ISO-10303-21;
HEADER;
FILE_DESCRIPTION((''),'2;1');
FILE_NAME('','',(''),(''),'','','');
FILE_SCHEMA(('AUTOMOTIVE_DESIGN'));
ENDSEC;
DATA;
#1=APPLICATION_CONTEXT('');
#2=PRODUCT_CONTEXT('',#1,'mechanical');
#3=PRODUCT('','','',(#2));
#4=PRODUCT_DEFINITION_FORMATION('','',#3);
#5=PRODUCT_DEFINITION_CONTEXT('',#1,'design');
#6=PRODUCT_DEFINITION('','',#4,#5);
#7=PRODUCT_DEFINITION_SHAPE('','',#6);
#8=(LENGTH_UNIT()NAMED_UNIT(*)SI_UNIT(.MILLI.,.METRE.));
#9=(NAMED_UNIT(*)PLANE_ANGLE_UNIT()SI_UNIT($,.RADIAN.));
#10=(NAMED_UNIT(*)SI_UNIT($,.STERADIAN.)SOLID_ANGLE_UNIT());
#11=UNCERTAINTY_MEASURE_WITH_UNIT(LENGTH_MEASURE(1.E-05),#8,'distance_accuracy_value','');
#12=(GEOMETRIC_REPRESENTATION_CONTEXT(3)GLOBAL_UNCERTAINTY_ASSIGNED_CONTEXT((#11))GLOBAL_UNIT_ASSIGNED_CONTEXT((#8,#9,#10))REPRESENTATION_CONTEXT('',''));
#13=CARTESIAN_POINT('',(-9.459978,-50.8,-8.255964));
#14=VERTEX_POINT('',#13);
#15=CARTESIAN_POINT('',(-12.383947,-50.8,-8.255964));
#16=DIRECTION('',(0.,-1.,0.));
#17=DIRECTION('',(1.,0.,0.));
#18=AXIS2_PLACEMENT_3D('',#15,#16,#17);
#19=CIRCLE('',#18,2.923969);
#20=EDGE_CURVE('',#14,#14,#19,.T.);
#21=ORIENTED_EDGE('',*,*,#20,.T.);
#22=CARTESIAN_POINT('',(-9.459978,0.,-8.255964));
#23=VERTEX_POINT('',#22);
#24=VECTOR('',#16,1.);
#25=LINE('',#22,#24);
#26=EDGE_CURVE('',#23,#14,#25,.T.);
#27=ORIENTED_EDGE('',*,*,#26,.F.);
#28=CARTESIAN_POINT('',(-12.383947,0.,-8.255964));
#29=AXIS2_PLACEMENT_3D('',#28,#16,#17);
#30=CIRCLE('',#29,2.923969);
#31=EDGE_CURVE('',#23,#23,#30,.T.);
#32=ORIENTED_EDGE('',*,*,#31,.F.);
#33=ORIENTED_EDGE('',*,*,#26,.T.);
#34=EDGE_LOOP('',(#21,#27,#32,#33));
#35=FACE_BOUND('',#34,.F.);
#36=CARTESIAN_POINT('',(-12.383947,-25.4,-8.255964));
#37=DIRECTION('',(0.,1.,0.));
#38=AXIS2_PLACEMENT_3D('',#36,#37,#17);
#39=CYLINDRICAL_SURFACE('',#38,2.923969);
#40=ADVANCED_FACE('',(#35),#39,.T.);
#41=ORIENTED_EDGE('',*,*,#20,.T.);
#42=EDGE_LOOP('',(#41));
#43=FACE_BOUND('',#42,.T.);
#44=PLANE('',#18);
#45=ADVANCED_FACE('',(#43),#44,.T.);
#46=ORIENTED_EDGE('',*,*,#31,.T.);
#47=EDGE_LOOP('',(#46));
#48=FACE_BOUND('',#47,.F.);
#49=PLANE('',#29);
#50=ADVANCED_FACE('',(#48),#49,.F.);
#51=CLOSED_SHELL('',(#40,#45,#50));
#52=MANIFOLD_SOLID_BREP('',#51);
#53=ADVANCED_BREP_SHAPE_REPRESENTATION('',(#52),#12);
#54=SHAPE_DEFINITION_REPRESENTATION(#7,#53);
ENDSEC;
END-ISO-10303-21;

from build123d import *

# Parameters (mm, degrees)
F0_R     = 2.9239691531
F2_DEPTH = 25.4
F3_DEPTH = 25.4


# Not quite as in the source:
# - the program builds the solid bodies; features that only make, move or delete a surface that nothing else refers to are left out


with BuildPart() as f2:
    # F0 (on Front) → F2 (new body)
    with BuildSketch(Plane.XZ):
        with Locations((-12.3839471489, -8.2559641451)):
            Circle(F0_R)
    extrude(amount=F2_DEPTH)

    # F3 (add): a face of the model
    f3_faces = [f2.faces().sort_by_distance(p)[0] for p in [
        (-12.3839471489, -25.4, -8.2559641451),
    ]]
    extrude(f3_faces, amount=F3_DEPTH)


solid = f2.part
